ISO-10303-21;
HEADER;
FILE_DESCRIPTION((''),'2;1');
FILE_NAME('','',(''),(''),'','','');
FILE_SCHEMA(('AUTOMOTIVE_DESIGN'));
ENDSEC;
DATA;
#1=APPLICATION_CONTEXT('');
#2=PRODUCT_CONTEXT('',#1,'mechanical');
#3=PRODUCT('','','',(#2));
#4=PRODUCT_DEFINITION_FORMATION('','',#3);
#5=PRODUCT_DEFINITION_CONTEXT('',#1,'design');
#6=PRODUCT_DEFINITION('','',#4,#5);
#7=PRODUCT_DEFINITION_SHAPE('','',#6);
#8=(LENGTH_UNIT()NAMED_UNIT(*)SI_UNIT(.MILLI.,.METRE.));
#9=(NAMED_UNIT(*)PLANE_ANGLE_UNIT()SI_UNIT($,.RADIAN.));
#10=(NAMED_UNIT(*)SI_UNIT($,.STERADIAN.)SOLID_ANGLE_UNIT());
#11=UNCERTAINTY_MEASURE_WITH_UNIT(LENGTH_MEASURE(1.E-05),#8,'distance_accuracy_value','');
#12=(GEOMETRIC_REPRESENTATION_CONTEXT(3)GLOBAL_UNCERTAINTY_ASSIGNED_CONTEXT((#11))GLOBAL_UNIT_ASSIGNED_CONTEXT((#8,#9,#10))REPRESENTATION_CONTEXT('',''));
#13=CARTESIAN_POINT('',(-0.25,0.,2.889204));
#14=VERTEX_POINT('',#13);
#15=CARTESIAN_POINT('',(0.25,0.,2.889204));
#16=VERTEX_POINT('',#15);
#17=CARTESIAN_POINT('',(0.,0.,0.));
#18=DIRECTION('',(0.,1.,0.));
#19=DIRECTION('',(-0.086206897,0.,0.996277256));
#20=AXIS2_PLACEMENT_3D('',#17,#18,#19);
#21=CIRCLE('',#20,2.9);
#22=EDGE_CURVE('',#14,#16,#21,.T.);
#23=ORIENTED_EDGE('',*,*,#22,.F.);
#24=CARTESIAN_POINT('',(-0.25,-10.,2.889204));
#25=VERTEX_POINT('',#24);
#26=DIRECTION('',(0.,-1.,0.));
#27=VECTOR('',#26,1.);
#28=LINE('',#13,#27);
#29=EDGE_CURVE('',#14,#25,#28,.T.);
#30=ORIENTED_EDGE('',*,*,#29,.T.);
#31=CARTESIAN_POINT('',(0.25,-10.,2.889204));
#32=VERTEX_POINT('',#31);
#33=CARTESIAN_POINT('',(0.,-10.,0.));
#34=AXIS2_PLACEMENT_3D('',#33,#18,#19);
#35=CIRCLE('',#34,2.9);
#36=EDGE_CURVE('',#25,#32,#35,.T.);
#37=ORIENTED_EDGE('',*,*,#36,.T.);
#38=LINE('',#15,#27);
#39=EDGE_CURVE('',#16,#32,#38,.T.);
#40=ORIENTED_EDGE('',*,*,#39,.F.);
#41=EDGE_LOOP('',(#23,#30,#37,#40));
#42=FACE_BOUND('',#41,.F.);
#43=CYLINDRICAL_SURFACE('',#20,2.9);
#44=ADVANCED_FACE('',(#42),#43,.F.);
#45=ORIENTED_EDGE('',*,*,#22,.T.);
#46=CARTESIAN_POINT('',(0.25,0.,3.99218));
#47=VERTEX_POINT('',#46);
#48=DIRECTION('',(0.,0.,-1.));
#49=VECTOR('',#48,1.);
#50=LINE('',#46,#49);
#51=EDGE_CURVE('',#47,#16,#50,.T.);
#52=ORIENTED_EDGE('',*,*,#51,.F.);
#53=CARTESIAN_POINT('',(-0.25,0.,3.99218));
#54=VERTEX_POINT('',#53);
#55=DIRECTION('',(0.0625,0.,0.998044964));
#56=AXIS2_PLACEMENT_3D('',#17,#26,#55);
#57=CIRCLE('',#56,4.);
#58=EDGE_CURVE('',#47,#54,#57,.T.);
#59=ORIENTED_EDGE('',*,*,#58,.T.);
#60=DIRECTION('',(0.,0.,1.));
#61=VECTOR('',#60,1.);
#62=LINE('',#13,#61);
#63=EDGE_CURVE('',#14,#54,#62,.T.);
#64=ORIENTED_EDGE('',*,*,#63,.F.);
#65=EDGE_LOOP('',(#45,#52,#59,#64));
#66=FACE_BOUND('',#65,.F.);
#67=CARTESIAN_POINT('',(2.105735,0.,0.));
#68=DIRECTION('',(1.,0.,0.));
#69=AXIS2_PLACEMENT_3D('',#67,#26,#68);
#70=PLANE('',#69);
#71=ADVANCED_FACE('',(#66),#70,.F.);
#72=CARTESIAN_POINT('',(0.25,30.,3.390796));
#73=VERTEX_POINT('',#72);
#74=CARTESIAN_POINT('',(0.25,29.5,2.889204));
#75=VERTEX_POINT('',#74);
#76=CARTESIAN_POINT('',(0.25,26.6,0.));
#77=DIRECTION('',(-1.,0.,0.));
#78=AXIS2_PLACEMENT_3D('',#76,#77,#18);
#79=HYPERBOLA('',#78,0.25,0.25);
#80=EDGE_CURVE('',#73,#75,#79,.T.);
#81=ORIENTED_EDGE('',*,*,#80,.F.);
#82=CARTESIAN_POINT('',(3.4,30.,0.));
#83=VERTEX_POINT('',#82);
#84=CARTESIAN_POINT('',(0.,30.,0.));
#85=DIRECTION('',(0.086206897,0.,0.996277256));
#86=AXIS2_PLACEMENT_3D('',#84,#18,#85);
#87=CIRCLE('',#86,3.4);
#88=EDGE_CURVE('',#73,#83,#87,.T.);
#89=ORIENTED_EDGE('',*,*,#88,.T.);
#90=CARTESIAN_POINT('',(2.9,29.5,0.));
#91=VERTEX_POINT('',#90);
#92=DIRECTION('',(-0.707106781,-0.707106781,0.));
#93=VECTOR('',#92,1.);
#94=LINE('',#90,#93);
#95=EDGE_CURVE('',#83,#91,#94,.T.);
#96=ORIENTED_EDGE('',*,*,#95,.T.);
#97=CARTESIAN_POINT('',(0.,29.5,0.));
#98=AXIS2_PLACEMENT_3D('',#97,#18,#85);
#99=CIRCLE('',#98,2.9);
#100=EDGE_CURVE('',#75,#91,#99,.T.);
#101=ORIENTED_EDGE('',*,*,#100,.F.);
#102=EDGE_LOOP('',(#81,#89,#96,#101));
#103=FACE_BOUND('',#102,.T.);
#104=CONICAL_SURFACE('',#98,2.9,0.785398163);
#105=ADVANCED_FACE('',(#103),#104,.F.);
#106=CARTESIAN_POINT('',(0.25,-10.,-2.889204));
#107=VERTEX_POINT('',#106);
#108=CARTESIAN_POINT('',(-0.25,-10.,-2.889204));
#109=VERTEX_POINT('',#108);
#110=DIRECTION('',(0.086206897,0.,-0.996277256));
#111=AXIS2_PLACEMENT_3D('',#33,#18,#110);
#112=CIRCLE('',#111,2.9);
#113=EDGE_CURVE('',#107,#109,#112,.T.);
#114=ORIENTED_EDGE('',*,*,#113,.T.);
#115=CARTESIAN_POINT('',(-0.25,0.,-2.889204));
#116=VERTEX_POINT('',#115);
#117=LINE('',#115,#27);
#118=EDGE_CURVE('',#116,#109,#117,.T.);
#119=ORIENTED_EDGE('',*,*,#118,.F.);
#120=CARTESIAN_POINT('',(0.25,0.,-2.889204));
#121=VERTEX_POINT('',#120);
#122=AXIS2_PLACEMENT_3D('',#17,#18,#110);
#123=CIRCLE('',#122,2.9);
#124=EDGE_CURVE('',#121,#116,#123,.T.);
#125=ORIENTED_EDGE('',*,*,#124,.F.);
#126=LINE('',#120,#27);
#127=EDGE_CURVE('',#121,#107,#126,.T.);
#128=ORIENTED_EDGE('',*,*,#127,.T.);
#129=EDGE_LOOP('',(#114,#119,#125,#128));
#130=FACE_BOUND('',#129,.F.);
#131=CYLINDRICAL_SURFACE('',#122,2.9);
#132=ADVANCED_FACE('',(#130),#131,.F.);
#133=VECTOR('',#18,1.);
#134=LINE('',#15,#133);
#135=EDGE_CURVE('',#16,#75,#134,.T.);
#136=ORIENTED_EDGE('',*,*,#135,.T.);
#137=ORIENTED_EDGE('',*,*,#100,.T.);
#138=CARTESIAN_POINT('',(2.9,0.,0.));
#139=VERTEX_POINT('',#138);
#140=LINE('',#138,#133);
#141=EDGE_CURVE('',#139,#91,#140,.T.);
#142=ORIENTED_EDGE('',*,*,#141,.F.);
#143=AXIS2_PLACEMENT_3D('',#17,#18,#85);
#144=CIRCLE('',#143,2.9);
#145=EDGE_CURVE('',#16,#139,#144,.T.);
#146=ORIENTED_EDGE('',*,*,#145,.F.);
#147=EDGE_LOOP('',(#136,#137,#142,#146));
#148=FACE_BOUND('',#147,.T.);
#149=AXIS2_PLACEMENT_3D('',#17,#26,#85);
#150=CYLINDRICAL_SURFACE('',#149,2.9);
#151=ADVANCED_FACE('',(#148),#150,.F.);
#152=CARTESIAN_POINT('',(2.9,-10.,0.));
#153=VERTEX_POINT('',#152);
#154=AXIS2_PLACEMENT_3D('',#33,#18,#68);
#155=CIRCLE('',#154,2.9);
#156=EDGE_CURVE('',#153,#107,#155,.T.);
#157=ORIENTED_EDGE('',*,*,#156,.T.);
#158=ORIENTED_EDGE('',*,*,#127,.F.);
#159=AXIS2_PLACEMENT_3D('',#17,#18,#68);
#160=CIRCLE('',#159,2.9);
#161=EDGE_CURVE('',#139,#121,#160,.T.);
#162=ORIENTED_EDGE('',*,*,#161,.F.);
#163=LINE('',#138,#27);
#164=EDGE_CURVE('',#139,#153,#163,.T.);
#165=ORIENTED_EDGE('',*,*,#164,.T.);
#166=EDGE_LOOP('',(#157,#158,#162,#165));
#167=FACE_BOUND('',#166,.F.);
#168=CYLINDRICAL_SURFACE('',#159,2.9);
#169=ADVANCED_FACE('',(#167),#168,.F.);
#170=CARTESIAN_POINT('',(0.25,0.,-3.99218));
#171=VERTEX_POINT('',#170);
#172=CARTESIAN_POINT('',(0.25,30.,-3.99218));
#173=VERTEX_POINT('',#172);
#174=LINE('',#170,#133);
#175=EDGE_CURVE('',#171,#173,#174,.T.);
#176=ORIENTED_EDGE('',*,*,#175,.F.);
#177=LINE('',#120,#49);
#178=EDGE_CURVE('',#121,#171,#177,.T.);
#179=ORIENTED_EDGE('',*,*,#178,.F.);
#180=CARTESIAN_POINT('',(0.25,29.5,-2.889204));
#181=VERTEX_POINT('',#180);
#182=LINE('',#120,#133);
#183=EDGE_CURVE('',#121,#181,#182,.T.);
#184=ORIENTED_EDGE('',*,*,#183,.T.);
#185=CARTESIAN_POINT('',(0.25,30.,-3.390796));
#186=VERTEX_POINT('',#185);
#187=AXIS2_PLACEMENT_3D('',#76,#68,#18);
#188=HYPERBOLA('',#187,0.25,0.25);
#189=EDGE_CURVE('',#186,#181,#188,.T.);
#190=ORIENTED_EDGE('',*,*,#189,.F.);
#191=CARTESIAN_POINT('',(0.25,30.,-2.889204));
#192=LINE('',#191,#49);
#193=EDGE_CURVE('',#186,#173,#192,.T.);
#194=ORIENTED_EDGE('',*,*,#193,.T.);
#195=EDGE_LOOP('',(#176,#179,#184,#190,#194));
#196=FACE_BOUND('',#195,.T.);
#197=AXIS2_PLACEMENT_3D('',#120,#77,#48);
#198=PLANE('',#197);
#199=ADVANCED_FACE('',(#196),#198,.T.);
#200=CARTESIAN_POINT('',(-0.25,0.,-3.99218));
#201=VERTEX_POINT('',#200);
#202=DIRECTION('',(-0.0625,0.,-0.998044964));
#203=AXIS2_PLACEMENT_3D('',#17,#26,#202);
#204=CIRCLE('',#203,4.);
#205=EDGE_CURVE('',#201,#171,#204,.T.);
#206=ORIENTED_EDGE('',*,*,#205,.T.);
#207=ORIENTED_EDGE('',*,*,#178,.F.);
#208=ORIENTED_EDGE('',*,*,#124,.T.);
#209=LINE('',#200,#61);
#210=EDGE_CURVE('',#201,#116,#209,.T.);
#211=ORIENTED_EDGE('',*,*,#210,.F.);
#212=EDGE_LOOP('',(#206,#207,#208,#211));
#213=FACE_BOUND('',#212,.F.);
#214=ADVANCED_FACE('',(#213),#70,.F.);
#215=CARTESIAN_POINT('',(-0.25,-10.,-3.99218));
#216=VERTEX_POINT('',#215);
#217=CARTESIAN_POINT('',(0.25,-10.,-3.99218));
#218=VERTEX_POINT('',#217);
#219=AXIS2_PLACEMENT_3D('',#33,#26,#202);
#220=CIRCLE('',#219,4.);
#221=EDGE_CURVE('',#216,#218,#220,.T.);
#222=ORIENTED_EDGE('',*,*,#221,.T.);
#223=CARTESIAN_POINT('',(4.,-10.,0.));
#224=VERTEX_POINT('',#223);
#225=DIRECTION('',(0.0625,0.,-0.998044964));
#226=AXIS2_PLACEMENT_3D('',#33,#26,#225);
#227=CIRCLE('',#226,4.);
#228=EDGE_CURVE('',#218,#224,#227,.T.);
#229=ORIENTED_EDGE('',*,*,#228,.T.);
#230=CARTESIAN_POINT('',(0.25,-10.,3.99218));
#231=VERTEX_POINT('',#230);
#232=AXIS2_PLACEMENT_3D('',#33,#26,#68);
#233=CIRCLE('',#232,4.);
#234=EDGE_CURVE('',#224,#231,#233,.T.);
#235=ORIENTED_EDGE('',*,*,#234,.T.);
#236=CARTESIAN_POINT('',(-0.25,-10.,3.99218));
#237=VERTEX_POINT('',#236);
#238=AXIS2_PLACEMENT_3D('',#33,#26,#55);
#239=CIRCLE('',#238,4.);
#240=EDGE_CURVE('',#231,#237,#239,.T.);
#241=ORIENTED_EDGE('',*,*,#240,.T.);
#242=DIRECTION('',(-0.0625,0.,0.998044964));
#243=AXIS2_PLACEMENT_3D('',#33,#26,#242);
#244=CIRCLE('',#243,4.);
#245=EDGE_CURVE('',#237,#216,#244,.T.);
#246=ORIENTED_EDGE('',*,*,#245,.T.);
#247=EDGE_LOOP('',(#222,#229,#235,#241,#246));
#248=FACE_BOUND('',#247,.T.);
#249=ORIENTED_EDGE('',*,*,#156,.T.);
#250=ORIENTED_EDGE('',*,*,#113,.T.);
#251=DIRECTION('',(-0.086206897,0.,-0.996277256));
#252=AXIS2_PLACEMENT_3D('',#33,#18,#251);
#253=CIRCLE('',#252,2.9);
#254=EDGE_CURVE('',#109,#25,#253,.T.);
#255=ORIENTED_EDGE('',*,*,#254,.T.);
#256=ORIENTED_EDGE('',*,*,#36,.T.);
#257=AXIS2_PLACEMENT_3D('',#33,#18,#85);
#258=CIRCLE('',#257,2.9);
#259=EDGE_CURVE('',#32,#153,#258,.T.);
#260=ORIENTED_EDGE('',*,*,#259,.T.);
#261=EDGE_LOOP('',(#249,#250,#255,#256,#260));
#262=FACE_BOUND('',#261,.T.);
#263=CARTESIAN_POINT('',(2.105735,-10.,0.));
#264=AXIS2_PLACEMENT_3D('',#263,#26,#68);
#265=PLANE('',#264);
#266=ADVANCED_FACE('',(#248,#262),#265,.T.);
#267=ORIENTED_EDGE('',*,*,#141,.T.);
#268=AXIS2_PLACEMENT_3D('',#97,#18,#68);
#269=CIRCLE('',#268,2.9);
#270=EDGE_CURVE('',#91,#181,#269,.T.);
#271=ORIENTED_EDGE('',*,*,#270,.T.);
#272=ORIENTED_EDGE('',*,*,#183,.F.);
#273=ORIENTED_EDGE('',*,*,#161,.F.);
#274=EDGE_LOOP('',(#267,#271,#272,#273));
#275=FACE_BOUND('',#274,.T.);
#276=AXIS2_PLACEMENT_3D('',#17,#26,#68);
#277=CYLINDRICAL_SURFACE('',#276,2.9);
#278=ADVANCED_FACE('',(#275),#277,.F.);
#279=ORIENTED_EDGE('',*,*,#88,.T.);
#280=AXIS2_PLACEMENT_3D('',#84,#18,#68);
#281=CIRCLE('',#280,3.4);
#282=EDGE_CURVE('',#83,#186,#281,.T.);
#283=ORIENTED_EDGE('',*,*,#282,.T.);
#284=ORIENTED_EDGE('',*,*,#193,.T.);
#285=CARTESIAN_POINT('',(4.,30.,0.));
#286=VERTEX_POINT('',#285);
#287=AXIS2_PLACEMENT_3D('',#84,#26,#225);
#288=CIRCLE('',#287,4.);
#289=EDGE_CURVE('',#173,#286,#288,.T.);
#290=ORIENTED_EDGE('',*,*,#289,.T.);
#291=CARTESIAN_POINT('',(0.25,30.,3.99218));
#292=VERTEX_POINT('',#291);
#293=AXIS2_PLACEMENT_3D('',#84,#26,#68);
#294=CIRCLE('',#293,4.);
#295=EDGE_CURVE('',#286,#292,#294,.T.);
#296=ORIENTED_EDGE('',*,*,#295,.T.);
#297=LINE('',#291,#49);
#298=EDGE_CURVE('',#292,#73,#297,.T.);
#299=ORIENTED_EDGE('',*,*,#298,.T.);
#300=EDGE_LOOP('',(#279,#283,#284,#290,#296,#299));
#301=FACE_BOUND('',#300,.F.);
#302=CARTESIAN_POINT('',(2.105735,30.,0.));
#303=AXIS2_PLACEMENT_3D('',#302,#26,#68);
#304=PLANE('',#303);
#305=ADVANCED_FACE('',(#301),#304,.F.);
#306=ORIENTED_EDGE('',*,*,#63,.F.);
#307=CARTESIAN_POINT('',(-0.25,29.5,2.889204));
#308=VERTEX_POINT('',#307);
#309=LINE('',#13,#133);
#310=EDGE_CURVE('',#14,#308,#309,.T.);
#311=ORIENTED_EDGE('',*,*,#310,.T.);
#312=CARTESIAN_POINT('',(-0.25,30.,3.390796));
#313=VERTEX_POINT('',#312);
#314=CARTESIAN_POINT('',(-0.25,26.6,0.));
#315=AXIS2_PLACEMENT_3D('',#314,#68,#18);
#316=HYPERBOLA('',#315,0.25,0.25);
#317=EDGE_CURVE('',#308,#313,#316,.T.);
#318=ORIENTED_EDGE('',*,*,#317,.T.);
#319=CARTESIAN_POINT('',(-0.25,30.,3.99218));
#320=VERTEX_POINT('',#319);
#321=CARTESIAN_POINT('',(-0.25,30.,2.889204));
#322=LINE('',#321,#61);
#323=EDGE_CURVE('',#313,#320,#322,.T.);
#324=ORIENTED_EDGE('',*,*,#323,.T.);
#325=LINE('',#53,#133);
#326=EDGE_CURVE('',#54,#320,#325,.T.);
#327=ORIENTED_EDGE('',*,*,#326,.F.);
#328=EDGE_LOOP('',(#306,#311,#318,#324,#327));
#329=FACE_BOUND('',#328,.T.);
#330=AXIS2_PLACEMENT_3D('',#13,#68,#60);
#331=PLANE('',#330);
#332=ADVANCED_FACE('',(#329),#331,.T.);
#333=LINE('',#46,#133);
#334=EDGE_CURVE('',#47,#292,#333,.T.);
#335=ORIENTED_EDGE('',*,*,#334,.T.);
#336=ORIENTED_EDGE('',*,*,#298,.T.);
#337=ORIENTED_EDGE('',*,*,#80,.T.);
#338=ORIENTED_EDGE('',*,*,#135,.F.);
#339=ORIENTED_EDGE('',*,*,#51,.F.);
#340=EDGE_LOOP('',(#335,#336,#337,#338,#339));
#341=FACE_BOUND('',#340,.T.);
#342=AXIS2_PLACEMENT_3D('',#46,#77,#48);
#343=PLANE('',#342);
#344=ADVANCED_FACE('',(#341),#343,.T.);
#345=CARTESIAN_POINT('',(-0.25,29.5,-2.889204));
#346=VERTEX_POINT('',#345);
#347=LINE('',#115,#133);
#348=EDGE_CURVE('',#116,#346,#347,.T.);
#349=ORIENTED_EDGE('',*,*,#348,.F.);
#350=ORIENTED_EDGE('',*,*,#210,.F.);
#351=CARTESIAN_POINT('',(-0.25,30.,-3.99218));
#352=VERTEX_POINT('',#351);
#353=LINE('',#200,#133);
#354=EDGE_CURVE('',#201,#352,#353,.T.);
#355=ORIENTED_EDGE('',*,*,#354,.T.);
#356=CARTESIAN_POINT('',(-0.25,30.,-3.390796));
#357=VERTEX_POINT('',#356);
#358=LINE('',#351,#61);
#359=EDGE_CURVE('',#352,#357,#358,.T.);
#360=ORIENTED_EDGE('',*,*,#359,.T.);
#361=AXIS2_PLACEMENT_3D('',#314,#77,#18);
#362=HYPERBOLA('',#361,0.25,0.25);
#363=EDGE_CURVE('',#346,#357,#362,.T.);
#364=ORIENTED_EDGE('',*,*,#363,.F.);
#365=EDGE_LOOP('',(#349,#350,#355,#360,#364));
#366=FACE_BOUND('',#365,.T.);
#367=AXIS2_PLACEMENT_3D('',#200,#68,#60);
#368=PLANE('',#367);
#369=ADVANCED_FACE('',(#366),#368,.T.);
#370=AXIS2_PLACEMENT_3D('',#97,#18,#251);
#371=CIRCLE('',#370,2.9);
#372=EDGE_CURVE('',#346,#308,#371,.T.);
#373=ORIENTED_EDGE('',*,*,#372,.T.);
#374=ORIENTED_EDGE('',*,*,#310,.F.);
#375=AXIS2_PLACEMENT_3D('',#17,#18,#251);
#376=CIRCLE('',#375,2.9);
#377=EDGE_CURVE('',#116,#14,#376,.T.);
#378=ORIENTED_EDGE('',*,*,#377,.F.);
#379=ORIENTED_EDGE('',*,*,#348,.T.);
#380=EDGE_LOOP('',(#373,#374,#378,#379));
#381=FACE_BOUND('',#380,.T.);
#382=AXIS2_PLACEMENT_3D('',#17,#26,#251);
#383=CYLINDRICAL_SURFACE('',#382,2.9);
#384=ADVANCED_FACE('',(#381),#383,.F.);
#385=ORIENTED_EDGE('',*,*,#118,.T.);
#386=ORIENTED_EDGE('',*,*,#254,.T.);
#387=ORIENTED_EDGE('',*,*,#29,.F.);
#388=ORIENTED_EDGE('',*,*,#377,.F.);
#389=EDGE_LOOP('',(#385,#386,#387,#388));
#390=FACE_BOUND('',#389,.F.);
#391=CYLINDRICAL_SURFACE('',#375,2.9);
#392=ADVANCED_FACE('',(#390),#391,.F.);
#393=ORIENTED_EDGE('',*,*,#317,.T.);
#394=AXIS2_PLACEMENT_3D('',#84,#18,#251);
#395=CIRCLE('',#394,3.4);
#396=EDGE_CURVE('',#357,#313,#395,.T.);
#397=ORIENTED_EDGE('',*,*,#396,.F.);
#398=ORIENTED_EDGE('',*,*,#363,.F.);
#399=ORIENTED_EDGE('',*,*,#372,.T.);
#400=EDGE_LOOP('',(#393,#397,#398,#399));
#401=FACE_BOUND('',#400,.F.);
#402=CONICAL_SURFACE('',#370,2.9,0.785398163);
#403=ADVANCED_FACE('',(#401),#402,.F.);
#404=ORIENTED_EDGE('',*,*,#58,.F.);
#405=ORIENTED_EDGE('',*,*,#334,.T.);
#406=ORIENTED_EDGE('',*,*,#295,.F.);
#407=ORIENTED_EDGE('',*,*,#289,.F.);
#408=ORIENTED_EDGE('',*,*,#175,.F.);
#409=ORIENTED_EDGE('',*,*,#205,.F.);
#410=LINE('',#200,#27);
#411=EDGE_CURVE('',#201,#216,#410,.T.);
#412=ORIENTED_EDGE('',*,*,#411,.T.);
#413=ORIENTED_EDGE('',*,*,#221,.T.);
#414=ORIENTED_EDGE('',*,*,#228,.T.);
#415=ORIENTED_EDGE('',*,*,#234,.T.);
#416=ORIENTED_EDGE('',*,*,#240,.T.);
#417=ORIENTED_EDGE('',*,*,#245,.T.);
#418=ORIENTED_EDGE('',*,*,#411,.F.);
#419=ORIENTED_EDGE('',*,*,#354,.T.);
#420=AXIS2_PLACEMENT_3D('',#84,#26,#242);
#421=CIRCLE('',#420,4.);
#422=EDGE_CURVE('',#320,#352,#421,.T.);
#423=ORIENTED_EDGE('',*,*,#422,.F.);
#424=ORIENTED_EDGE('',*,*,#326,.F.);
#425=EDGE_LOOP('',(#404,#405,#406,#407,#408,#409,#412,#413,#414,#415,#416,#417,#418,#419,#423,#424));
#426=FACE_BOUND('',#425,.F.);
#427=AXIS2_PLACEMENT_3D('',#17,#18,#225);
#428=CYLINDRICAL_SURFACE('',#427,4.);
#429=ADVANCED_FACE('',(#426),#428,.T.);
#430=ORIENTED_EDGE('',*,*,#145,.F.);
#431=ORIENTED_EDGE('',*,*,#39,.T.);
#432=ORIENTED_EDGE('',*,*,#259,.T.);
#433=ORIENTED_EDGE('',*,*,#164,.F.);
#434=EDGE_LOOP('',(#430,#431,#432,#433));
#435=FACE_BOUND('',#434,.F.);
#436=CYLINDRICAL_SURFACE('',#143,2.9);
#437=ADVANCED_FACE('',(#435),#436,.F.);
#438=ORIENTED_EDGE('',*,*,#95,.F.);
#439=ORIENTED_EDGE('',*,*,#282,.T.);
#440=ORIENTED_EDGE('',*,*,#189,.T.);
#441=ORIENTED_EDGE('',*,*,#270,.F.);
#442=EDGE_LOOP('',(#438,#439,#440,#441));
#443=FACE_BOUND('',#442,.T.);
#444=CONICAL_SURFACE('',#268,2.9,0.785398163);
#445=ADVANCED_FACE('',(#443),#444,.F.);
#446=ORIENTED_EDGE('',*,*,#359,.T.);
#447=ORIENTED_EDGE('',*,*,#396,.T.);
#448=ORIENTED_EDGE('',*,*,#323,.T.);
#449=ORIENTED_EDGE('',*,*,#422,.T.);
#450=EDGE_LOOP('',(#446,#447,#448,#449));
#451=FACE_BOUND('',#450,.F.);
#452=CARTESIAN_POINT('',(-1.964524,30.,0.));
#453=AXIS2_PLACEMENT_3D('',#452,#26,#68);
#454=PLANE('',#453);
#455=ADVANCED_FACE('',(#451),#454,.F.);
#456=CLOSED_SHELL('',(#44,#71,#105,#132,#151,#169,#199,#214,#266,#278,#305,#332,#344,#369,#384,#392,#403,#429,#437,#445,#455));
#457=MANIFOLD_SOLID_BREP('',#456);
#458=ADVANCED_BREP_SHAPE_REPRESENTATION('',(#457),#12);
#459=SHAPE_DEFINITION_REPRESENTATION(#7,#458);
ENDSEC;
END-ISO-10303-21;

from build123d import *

# Parameters (mm, degrees)
F1_DEPTH = 30
F2_DEPTH = 10
F3_SIZE  = 0.5


with BuildPart() as f1:
    # F0 (on Front) → F1 (new body)
    with BuildSketch(Plane.XZ):
        with BuildLine():
            Line((-0.25, 2.8892040426), (-0.25, 3.9921798557))
            ThreePointArc((-0.25, 3.9921798557), (-4, 0), (-0.25, -3.9921798557))
            Line((-0.25, -3.9921798557), (-0.25, -2.8892040426))
            ThreePointArc((-0.25, -2.8892040426), (-2.9, 0), (-0.25, 2.8892040426))
        make_face()
    extrude(amount=-F1_DEPTH)



with BuildPart() as f1b:
    # F0 (on Front) → F1, piece 2 (new body)
    with BuildSketch(Plane.XZ):
        with BuildLine():
            ThreePointArc((0.25, -3.9921798557), (2.9154759474, -2.7386127875), (4, 0))
            ThreePointArc((4, 0), (2.9154759474, 2.7386127875), (0.25, 3.9921798557))
            Line((0.25, 3.9921798557), (0.25, 2.8892040426))
            ThreePointArc((0.25, 2.8892040426), (2.1371710273, 1.9602295784), (2.9, 0))
            ThreePointArc((2.9, 0), (2.1371710273, -1.9602295784), (0.25, -2.8892040426))
            Line((0.25, -2.8892040426), (0.25, -3.9921798557))
        make_face()
    extrude(amount=-F1_DEPTH)


with BuildPart() as f1_1:
    add(f1.part)

    add(f1b.part)  # F2 merges F1b
    # F0 (on Front) → F2 (join)
    with BuildSketch(Plane.XZ):
        with BuildLine():
            ThreePointArc((0.25, -3.9921798557), (2.9154759474, -2.7386127875), (4, 0))
            ThreePointArc((4, 0), (2.9154759474, 2.7386127875), (0.25, 3.9921798557))
            Line((0.25, 3.9921798557), (0.25, 2.8892040426))
            ThreePointArc((0.25, 2.8892040426), (2.1371710273, 1.9602295784), (2.9, 0))
            ThreePointArc((2.9, 0), (2.1371710273, -1.9602295784), (0.25, -2.8892040426))
            Line((0.25, -2.8892040426), (0.25, -3.9921798557))
        make_face()
        with BuildLine():
            Line((0.25, 2.8892040426), (0.25, 3.9921798557))
            ThreePointArc((0.25, 3.9921798557), (0, 4), (-0.25, 3.9921798557))
            Line((-0.25, 3.9921798557), (-0.25, 2.8892040426))
            ThreePointArc((-0.25, 2.8892040426), (0, 2.9), (0.25, 2.8892040426))
        make_face()
        with BuildLine():
            ThreePointArc((-0.25, -3.9921798557), (0, -4), (0.25, -3.9921798557))
            Line((0.25, -3.9921798557), (0.25, -2.8892040426))
            ThreePointArc((0.25, -2.8892040426), (0, -2.9), (-0.25, -2.8892040426))
            Line((-0.25, -2.8892040426), (-0.25, -3.9921798557))
        make_face()
        with BuildLine():
            Line((-0.25, 2.8892040426), (-0.25, 3.9921798557))
            ThreePointArc((-0.25, 3.9921798557), (-4, 0), (-0.25, -3.9921798557))
            Line((-0.25, -3.9921798557), (-0.25, -2.8892040426))
            ThreePointArc((-0.25, -2.8892040426), (-2.9, 0), (-0.25, 2.8892040426))
        make_face()
    extrude(amount=F2_DEPTH)

    # F3
    f3_edges = [f1_1.edges().sort_by_distance(p)[0] for p in [
        (-2.9, 30, 0),
        (2.9, 30, 0),
    ]]
    chamfer(f3_edges, length=F3_SIZE)


solid = f1_1.part
